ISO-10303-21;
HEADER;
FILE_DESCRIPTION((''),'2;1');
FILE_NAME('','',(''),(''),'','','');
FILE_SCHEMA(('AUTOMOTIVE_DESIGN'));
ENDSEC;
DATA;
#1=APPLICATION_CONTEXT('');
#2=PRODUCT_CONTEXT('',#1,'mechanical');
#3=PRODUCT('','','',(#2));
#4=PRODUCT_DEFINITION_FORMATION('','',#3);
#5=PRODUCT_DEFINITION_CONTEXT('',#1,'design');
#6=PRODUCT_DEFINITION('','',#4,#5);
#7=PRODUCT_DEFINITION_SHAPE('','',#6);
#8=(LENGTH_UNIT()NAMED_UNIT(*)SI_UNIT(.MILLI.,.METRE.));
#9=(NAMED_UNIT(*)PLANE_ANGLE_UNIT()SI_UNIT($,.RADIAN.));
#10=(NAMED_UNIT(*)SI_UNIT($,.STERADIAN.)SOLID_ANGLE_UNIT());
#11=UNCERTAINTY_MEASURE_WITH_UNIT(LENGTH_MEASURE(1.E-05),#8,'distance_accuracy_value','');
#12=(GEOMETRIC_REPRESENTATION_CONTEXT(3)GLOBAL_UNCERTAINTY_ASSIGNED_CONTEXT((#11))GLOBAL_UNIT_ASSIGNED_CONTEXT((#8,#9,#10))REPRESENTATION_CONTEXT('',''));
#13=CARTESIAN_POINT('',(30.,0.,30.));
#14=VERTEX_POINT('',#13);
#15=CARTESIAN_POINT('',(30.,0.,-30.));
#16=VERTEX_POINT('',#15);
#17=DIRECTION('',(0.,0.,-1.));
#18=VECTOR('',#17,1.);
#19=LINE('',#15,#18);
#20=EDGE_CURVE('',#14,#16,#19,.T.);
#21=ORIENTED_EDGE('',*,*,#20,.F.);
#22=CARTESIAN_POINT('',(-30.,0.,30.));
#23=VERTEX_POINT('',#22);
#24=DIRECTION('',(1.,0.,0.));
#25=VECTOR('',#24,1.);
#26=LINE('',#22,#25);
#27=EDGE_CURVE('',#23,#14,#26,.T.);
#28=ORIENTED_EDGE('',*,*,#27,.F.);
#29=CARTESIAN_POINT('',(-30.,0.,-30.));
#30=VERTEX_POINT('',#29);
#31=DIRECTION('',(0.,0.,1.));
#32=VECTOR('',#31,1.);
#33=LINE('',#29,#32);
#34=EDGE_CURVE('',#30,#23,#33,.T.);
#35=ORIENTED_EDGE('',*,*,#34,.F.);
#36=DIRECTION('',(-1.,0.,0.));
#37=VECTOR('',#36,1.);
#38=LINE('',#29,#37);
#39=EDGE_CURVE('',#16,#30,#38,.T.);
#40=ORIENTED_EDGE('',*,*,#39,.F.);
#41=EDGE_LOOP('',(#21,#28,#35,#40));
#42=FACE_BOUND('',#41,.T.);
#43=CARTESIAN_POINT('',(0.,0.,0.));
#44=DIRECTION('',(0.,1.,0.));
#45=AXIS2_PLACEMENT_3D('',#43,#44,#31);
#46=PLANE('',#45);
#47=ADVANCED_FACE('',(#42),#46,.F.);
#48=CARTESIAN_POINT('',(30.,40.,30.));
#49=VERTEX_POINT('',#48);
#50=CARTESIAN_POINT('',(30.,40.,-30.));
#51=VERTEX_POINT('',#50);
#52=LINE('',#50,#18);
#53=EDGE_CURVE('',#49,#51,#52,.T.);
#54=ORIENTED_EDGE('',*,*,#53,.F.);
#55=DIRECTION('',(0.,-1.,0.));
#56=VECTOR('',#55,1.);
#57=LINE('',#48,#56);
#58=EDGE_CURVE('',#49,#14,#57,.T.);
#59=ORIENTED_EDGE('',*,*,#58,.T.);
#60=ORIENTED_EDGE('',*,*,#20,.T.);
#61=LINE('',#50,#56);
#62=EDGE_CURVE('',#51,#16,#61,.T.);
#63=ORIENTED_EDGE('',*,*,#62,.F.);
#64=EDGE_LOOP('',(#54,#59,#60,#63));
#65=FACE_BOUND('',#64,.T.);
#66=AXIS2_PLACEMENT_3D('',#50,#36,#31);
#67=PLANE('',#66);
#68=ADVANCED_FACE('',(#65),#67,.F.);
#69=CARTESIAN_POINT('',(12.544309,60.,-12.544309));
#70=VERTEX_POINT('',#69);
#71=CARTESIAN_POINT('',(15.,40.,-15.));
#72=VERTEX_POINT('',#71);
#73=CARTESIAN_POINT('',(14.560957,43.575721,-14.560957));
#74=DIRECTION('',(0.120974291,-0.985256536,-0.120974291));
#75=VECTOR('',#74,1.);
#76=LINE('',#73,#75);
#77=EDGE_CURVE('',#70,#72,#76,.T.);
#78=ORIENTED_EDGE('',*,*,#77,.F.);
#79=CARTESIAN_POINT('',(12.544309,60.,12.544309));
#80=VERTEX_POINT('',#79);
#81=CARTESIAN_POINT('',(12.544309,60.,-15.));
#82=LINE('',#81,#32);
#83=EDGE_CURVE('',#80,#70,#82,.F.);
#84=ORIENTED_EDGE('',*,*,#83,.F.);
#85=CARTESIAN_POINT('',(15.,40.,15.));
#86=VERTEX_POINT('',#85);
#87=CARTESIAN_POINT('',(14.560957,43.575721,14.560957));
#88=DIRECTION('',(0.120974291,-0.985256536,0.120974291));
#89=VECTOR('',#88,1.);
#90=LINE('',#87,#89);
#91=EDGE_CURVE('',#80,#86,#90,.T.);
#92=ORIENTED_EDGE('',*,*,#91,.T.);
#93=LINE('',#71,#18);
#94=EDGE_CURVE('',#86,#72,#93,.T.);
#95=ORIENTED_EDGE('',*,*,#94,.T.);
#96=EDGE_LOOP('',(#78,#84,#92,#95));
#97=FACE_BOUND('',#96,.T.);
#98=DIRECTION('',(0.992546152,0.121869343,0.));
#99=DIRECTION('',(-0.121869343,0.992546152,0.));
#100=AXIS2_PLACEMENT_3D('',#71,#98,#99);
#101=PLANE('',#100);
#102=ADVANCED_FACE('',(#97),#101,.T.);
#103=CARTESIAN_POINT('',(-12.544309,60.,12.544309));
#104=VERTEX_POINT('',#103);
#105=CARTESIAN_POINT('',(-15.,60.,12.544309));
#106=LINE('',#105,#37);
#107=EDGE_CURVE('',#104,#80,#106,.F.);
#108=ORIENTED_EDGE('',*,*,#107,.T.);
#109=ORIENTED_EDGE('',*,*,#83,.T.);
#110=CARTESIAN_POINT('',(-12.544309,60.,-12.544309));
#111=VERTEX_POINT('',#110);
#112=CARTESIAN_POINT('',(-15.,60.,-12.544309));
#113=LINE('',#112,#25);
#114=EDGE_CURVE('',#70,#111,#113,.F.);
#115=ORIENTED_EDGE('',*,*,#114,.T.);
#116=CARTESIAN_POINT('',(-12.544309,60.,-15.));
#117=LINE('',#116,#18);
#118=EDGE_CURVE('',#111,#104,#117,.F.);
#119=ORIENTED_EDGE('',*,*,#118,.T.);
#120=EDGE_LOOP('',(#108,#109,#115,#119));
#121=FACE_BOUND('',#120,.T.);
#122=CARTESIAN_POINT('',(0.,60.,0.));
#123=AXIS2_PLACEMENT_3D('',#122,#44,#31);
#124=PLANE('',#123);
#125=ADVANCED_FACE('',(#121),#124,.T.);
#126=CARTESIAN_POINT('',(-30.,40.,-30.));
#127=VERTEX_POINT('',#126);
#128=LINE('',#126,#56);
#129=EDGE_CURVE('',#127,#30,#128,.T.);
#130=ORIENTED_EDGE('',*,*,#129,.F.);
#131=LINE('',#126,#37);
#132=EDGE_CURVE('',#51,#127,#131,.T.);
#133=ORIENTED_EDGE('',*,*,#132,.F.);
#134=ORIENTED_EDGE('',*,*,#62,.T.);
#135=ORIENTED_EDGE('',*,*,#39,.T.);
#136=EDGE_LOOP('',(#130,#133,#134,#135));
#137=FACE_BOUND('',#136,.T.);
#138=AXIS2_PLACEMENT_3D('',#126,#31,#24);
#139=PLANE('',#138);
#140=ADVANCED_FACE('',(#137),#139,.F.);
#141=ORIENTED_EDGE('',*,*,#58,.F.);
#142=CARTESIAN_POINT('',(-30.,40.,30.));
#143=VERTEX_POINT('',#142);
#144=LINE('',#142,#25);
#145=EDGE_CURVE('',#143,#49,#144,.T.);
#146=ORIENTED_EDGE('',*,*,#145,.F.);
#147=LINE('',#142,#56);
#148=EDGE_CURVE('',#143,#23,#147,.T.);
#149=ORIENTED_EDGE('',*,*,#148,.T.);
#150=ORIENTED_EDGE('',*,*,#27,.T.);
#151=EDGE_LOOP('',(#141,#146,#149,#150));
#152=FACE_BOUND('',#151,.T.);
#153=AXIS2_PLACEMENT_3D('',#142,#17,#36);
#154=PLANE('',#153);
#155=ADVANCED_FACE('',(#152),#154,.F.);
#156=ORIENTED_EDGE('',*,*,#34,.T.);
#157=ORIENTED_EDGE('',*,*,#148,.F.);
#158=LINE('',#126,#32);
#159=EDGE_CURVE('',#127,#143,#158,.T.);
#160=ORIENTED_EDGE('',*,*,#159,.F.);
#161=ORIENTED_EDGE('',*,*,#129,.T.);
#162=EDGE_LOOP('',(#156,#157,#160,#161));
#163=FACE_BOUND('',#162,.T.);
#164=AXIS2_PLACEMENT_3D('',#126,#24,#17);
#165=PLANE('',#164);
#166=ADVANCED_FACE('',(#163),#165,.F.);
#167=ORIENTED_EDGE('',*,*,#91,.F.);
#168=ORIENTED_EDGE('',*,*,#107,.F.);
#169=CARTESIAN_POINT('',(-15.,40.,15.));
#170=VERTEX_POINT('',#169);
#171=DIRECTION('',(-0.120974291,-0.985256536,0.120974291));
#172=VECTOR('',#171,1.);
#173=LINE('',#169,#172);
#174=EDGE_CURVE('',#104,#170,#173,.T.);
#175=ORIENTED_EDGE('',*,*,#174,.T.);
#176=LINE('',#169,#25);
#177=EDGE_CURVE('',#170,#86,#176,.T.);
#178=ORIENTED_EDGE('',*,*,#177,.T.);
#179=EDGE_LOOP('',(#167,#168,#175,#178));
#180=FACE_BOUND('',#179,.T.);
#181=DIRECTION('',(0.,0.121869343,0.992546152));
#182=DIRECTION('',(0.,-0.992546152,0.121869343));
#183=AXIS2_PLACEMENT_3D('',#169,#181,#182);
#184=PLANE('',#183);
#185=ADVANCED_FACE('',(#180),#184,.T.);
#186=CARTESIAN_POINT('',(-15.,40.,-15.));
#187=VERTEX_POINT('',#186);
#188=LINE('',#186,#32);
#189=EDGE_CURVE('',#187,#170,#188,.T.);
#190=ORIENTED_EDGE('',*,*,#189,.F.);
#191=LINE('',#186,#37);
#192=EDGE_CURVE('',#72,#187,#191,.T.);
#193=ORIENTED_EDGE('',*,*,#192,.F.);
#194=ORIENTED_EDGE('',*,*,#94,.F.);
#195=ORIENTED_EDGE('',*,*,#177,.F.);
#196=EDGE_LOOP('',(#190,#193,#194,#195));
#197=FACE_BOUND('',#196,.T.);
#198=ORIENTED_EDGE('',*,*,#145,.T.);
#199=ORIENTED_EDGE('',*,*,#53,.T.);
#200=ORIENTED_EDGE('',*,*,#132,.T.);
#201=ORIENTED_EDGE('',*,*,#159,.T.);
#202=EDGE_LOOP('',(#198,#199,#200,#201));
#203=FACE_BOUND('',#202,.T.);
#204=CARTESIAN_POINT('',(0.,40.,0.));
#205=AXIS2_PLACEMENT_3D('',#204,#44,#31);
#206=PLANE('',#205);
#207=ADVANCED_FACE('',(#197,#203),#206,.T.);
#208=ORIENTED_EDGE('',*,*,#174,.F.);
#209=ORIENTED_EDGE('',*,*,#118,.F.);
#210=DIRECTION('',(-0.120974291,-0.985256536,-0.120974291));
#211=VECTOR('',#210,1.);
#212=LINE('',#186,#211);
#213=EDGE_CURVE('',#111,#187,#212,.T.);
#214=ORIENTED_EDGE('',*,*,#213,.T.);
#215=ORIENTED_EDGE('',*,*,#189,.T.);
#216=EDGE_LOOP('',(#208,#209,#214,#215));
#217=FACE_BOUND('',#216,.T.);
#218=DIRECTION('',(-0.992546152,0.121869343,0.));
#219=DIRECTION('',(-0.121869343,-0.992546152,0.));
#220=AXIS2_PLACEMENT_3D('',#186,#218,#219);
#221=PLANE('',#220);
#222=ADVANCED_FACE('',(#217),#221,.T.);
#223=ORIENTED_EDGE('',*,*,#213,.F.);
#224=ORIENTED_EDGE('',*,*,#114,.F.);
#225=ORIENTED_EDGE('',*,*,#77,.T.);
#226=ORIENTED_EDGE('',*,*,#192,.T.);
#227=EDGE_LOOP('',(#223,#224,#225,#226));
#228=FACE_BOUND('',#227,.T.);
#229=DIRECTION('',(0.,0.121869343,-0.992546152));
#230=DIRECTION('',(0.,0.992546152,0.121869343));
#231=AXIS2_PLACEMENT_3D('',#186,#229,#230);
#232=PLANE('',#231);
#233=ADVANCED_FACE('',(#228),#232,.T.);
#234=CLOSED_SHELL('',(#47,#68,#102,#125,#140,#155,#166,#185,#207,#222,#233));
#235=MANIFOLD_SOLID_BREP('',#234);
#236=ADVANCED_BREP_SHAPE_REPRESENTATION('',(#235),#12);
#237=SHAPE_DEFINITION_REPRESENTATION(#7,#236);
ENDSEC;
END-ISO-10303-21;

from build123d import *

# Parameters (mm, degrees)
SKETCH1_W           = 60
SKETCH1_H           = 60
BOSS_EXTRUDE1_DEPTH = 40
SKETCH2_W           = 30
SKETCH2_H           = 30
BOSS_EXTRUDE2_DEPTH = 20
BOSS_EXTRUDE2_TAPER = 5
DRAFT1_START        = -16
DRAFT1_DEPTH        = 32
DRAFT1_2_DEPTH      = 32


with BuildPart() as part:
    # Sketch1 → Boss-Extrude1 (new body)
    with BuildSketch(Plane(origin=(0, 0, 0), x_dir=(1, 0, 0), z_dir=(0, 1, 0))):
        Rectangle(SKETCH1_W, SKETCH1_H)
    extrude(amount=BOSS_EXTRUDE1_DEPTH)

    # Sketch2 → Boss-Extrude2 (add)
    with BuildSketch(Plane(origin=(0, 40, 0), x_dir=(1, 0, 0), z_dir=(0, 1, 0))):
        Rectangle(SKETCH2_W, SKETCH2_H)
    extrude(amount=BOSS_EXTRUDE2_DEPTH, taper=BOSS_EXTRUDE2_TAPER)

    # Draft1: read off the stored shape, not the designer's step
    # Draft1 outline → Draft1 (cut)
    with BuildSketch(Plane.XY.offset(DRAFT1_START)):
        Polygon((-15, 40), (-12.544308782, 60), (-13.250226729, 60), align=None)
        Polygon((12.544308782, 60), (15, 40), (13.250226729, 60), align=None)
    extrude(amount=DRAFT1_DEPTH, mode=Mode.SUBTRACT)

    # Draft1 2 outline → Draft1 2 (cut)
    with BuildSketch(Plane.YZ.offset(DRAFT1_START)):
        Polygon((60, -12.544308782), (40, -15), (60, -13.250226729), align=None)
        Polygon((60, 13.250226729), (40, 15), (60, 12.544308782), align=None)
    extrude(amount=DRAFT1_2_DEPTH, mode=Mode.SUBTRACT)


solid = part.part
